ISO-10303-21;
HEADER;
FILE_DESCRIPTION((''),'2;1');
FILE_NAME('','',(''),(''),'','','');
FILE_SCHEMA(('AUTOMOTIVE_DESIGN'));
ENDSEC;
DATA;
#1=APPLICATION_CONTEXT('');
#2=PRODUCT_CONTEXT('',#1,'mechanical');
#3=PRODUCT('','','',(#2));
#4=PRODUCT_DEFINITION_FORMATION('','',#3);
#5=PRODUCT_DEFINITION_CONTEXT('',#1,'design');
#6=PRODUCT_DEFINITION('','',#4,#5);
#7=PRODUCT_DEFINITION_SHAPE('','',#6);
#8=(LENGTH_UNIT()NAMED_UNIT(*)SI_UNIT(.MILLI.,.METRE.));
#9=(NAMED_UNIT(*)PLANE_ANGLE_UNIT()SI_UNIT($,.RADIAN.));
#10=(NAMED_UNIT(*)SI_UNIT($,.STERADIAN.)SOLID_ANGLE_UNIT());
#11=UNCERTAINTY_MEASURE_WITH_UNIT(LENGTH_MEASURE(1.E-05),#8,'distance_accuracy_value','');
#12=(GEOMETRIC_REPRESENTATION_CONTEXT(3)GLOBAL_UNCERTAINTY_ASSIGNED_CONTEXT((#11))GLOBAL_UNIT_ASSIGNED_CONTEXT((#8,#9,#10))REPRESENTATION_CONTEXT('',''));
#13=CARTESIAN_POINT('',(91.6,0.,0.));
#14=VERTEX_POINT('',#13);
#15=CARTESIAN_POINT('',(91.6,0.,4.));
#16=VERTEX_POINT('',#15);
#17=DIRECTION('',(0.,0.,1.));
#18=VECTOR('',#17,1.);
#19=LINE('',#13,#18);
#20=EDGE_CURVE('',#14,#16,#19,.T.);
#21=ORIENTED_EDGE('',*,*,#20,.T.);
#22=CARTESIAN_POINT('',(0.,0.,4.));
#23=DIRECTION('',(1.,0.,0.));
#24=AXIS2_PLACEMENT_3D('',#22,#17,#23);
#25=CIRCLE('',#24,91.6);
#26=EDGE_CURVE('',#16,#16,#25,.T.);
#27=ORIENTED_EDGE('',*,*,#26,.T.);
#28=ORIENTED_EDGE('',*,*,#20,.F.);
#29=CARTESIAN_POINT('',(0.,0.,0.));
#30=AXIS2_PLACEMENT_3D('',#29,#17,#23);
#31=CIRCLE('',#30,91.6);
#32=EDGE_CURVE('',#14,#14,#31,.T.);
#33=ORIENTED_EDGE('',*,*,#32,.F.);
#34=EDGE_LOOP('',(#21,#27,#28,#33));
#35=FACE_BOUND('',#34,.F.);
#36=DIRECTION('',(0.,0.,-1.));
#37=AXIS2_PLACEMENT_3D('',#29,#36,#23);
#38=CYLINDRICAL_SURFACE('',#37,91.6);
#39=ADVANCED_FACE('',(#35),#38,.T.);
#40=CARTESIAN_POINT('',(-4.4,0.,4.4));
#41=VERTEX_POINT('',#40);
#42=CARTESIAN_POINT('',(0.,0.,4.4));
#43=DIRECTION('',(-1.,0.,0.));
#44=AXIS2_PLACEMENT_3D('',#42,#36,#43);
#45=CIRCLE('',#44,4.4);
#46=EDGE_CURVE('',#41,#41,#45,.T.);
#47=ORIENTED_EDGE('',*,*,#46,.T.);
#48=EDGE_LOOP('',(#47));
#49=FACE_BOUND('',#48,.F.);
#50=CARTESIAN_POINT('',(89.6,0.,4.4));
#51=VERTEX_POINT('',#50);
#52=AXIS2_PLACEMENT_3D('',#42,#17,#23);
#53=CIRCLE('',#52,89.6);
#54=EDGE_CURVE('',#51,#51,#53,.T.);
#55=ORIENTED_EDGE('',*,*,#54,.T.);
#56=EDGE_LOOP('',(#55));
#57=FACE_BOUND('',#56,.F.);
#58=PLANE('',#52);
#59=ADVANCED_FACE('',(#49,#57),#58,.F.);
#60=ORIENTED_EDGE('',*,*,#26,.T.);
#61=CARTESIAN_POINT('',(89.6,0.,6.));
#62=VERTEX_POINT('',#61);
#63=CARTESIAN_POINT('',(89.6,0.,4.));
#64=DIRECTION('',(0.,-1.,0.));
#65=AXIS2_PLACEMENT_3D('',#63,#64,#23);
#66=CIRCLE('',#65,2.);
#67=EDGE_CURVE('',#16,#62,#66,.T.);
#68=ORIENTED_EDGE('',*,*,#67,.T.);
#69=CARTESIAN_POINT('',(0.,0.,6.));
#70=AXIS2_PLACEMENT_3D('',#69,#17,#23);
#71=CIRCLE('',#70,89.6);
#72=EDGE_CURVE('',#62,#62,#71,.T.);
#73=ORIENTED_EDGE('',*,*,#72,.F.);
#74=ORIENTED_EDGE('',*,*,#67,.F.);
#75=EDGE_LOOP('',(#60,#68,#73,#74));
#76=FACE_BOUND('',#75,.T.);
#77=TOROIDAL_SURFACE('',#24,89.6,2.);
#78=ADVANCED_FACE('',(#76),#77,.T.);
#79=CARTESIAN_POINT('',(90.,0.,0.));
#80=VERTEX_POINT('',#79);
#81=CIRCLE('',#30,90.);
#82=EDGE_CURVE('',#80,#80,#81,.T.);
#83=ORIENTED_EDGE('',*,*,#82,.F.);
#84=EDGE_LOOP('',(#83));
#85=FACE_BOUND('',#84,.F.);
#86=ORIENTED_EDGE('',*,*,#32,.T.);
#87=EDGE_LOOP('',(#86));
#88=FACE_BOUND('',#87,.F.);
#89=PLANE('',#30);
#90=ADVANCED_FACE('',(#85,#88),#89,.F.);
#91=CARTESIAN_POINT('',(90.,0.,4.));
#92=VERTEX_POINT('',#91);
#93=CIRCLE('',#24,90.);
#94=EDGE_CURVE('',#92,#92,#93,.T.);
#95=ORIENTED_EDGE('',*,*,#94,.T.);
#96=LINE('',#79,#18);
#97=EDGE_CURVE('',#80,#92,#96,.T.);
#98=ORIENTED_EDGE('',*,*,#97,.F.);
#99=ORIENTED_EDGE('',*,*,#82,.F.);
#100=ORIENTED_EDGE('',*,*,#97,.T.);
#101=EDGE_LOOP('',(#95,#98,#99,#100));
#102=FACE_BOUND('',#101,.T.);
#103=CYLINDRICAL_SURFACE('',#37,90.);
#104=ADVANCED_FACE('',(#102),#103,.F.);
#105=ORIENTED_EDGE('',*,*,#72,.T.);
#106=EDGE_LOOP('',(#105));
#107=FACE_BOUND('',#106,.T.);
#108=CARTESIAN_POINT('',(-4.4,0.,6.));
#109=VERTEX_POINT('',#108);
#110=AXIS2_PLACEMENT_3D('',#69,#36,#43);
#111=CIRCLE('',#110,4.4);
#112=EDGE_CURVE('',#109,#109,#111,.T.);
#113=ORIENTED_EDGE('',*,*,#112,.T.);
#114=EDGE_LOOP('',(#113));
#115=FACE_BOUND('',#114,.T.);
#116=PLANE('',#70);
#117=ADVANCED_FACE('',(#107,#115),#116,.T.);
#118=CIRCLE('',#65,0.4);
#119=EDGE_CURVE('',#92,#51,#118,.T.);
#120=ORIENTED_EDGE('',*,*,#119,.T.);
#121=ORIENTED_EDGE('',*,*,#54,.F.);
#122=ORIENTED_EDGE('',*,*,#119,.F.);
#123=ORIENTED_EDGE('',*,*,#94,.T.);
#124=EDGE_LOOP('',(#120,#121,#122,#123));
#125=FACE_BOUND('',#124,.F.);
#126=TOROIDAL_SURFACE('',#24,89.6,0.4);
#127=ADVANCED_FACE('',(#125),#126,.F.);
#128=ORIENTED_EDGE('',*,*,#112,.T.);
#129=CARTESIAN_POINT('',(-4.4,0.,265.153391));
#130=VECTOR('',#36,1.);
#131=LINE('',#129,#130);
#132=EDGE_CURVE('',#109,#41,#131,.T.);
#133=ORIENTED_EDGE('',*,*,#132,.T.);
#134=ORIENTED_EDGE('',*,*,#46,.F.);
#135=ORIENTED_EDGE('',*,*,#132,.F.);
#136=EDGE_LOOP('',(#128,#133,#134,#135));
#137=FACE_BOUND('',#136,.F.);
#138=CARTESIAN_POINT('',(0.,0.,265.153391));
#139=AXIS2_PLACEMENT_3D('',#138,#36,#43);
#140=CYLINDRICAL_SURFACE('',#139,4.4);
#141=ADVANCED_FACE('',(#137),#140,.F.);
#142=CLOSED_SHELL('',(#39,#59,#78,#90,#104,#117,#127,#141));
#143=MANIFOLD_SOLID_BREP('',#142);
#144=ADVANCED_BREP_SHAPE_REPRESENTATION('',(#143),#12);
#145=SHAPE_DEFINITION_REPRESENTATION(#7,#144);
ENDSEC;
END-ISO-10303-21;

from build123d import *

# Parameters (mm, degrees)
F0_R     = 91.6
F1_DEPTH = 6
F2_R     = 2
F3_T     = -1.6
F6_R     = 30
F7_DEPTH = 50
F8_R     = 26.5
F9_DEPTH = 56.001
F12_D    = 8.8


with BuildPart() as f1:
    # F0 (on Top) → F1 (new body)
    with BuildSketch(Plane.XY):
        Circle(F0_R)
    extrude(amount=F1_DEPTH)

    # F2
    f2_edges = [f1.edges().sort_by_distance(p)[0] for p in [
        (-91.6, 0, 6),
    ]]
    fillet(f2_edges, radius=F2_R)

    # F3
    f3_openings = [f1.faces().sort_by_distance(p)[0] for p in [
        (0, 0, 0),
    ]]
    offset(amount=F3_T, openings=f3_openings)


with BuildPart() as f5_1:
    # F5: copy of F1
    add(f1.part)


with BuildPart() as f7:
    # F6 (on face) → F7 (new body)
    with BuildSketch(Plane.XY.offset(6)):
        Circle(F6_R)
    extrude(amount=F7_DEPTH)

    # F8 (on face) → F9 (cut, through all)
    with BuildSketch(Plane.XY.offset(56)):
        Circle(F8_R)
    extrude(amount=-F9_DEPTH, mode=Mode.SUBTRACT)


with BuildPart() as f1_1:
    add(f1.part)

    # F12 (through all)
    with Locations(Plane.XY.offset(6)):
        with Locations((0, 0)):
            Hole(F12_D / 2)


solid = f1_1.part
